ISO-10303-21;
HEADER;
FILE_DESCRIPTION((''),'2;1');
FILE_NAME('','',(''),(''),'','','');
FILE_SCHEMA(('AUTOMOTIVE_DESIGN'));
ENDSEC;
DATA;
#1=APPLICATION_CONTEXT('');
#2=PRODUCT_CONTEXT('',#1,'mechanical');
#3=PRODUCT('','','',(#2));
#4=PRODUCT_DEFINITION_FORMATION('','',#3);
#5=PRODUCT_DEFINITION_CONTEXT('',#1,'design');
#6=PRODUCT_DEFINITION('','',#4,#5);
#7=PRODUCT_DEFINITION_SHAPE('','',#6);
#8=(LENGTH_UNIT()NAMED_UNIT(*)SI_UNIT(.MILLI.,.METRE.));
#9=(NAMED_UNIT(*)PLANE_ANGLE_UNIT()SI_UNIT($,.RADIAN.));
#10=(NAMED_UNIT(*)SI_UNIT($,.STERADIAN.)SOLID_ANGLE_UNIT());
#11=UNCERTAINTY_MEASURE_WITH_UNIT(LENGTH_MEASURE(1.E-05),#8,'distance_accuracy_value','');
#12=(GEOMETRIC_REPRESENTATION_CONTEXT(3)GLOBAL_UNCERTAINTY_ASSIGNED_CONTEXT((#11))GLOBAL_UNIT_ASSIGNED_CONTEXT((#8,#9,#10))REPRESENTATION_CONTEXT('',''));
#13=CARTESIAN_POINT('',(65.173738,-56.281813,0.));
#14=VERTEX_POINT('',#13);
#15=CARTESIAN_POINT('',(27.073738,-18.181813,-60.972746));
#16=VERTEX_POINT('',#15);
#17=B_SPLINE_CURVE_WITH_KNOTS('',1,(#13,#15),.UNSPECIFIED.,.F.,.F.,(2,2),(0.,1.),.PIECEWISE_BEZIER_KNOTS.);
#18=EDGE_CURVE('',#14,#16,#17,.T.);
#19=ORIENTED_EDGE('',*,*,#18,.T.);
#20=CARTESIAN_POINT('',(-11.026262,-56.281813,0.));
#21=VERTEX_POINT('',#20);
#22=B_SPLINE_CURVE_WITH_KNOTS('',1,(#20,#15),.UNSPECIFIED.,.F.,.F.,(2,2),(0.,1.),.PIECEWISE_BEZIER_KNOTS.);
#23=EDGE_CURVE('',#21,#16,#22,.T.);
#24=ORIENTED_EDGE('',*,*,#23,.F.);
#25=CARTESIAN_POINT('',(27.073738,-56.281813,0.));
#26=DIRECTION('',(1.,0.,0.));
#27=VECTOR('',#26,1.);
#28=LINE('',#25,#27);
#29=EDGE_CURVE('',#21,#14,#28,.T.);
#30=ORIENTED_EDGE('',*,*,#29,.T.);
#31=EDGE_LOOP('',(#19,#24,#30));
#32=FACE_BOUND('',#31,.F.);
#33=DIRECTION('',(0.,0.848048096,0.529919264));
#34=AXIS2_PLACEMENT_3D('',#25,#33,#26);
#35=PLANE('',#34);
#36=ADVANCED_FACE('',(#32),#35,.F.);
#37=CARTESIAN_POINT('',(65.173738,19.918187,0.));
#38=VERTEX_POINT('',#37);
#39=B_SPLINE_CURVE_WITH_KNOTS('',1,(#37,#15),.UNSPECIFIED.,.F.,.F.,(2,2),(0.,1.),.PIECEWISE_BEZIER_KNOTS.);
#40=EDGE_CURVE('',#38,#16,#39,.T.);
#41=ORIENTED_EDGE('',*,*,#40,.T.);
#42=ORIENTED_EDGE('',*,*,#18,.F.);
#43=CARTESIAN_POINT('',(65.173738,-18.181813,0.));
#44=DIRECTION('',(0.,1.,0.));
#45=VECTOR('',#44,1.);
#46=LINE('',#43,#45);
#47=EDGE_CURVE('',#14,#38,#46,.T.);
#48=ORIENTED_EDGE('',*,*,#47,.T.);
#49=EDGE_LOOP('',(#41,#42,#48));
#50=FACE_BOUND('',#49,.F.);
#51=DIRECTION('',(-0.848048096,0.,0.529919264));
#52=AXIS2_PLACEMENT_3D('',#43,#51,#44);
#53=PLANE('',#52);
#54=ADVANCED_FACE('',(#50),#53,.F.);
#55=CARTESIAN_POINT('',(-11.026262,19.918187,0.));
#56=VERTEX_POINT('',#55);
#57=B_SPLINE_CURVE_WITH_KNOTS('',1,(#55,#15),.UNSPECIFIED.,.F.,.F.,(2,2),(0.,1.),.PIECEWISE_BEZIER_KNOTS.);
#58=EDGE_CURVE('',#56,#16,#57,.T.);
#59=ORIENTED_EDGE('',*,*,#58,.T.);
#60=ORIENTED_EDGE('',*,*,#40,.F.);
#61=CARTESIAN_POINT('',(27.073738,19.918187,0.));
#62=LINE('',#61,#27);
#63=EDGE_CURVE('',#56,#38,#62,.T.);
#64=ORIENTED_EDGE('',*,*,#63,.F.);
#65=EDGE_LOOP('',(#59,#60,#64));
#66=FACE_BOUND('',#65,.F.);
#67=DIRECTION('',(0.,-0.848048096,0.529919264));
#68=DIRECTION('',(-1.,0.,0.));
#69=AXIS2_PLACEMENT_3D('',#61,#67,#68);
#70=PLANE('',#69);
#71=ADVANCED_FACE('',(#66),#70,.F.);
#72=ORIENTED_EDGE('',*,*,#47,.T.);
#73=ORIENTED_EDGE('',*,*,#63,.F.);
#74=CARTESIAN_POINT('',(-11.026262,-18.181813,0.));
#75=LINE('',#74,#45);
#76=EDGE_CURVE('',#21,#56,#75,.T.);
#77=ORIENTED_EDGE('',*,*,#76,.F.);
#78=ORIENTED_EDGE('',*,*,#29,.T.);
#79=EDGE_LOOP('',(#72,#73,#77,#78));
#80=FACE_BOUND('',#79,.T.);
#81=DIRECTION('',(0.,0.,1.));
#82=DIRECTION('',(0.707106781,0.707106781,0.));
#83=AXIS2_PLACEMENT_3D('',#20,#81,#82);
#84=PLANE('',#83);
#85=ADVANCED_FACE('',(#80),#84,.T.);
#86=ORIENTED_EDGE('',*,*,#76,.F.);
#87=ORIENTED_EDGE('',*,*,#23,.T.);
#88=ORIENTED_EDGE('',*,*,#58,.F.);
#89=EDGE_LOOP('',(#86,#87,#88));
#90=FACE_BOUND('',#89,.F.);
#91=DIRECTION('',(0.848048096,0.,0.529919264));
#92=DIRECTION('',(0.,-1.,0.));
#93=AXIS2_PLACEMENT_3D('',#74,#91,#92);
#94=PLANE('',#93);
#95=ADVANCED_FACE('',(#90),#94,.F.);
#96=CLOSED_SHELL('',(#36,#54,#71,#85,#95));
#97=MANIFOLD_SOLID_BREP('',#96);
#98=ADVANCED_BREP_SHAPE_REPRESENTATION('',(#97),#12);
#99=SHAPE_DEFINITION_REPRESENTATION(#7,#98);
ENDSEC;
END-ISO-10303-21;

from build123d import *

# Parameters (mm, degrees)
F0_W = 76.2
F0_H = 76.2


# Not quite as in the source:
# - an extrude whose draft closes it to a point is written as a loft to that point


with BuildPart() as f1:
    # F0 (on Top) → F1 section 0
    with BuildSketch(Plane.XY, mode=Mode.PRIVATE) as f1_s0:
        with Locations((27.0737381454, -18.1818129495)):
            Rectangle(F0_W, F0_H)
    loft([f1_s0.sketch, Vertex(27.0737381454, -18.1818129495, -60.9727455565)], ruled=True)


solid = f1.part
